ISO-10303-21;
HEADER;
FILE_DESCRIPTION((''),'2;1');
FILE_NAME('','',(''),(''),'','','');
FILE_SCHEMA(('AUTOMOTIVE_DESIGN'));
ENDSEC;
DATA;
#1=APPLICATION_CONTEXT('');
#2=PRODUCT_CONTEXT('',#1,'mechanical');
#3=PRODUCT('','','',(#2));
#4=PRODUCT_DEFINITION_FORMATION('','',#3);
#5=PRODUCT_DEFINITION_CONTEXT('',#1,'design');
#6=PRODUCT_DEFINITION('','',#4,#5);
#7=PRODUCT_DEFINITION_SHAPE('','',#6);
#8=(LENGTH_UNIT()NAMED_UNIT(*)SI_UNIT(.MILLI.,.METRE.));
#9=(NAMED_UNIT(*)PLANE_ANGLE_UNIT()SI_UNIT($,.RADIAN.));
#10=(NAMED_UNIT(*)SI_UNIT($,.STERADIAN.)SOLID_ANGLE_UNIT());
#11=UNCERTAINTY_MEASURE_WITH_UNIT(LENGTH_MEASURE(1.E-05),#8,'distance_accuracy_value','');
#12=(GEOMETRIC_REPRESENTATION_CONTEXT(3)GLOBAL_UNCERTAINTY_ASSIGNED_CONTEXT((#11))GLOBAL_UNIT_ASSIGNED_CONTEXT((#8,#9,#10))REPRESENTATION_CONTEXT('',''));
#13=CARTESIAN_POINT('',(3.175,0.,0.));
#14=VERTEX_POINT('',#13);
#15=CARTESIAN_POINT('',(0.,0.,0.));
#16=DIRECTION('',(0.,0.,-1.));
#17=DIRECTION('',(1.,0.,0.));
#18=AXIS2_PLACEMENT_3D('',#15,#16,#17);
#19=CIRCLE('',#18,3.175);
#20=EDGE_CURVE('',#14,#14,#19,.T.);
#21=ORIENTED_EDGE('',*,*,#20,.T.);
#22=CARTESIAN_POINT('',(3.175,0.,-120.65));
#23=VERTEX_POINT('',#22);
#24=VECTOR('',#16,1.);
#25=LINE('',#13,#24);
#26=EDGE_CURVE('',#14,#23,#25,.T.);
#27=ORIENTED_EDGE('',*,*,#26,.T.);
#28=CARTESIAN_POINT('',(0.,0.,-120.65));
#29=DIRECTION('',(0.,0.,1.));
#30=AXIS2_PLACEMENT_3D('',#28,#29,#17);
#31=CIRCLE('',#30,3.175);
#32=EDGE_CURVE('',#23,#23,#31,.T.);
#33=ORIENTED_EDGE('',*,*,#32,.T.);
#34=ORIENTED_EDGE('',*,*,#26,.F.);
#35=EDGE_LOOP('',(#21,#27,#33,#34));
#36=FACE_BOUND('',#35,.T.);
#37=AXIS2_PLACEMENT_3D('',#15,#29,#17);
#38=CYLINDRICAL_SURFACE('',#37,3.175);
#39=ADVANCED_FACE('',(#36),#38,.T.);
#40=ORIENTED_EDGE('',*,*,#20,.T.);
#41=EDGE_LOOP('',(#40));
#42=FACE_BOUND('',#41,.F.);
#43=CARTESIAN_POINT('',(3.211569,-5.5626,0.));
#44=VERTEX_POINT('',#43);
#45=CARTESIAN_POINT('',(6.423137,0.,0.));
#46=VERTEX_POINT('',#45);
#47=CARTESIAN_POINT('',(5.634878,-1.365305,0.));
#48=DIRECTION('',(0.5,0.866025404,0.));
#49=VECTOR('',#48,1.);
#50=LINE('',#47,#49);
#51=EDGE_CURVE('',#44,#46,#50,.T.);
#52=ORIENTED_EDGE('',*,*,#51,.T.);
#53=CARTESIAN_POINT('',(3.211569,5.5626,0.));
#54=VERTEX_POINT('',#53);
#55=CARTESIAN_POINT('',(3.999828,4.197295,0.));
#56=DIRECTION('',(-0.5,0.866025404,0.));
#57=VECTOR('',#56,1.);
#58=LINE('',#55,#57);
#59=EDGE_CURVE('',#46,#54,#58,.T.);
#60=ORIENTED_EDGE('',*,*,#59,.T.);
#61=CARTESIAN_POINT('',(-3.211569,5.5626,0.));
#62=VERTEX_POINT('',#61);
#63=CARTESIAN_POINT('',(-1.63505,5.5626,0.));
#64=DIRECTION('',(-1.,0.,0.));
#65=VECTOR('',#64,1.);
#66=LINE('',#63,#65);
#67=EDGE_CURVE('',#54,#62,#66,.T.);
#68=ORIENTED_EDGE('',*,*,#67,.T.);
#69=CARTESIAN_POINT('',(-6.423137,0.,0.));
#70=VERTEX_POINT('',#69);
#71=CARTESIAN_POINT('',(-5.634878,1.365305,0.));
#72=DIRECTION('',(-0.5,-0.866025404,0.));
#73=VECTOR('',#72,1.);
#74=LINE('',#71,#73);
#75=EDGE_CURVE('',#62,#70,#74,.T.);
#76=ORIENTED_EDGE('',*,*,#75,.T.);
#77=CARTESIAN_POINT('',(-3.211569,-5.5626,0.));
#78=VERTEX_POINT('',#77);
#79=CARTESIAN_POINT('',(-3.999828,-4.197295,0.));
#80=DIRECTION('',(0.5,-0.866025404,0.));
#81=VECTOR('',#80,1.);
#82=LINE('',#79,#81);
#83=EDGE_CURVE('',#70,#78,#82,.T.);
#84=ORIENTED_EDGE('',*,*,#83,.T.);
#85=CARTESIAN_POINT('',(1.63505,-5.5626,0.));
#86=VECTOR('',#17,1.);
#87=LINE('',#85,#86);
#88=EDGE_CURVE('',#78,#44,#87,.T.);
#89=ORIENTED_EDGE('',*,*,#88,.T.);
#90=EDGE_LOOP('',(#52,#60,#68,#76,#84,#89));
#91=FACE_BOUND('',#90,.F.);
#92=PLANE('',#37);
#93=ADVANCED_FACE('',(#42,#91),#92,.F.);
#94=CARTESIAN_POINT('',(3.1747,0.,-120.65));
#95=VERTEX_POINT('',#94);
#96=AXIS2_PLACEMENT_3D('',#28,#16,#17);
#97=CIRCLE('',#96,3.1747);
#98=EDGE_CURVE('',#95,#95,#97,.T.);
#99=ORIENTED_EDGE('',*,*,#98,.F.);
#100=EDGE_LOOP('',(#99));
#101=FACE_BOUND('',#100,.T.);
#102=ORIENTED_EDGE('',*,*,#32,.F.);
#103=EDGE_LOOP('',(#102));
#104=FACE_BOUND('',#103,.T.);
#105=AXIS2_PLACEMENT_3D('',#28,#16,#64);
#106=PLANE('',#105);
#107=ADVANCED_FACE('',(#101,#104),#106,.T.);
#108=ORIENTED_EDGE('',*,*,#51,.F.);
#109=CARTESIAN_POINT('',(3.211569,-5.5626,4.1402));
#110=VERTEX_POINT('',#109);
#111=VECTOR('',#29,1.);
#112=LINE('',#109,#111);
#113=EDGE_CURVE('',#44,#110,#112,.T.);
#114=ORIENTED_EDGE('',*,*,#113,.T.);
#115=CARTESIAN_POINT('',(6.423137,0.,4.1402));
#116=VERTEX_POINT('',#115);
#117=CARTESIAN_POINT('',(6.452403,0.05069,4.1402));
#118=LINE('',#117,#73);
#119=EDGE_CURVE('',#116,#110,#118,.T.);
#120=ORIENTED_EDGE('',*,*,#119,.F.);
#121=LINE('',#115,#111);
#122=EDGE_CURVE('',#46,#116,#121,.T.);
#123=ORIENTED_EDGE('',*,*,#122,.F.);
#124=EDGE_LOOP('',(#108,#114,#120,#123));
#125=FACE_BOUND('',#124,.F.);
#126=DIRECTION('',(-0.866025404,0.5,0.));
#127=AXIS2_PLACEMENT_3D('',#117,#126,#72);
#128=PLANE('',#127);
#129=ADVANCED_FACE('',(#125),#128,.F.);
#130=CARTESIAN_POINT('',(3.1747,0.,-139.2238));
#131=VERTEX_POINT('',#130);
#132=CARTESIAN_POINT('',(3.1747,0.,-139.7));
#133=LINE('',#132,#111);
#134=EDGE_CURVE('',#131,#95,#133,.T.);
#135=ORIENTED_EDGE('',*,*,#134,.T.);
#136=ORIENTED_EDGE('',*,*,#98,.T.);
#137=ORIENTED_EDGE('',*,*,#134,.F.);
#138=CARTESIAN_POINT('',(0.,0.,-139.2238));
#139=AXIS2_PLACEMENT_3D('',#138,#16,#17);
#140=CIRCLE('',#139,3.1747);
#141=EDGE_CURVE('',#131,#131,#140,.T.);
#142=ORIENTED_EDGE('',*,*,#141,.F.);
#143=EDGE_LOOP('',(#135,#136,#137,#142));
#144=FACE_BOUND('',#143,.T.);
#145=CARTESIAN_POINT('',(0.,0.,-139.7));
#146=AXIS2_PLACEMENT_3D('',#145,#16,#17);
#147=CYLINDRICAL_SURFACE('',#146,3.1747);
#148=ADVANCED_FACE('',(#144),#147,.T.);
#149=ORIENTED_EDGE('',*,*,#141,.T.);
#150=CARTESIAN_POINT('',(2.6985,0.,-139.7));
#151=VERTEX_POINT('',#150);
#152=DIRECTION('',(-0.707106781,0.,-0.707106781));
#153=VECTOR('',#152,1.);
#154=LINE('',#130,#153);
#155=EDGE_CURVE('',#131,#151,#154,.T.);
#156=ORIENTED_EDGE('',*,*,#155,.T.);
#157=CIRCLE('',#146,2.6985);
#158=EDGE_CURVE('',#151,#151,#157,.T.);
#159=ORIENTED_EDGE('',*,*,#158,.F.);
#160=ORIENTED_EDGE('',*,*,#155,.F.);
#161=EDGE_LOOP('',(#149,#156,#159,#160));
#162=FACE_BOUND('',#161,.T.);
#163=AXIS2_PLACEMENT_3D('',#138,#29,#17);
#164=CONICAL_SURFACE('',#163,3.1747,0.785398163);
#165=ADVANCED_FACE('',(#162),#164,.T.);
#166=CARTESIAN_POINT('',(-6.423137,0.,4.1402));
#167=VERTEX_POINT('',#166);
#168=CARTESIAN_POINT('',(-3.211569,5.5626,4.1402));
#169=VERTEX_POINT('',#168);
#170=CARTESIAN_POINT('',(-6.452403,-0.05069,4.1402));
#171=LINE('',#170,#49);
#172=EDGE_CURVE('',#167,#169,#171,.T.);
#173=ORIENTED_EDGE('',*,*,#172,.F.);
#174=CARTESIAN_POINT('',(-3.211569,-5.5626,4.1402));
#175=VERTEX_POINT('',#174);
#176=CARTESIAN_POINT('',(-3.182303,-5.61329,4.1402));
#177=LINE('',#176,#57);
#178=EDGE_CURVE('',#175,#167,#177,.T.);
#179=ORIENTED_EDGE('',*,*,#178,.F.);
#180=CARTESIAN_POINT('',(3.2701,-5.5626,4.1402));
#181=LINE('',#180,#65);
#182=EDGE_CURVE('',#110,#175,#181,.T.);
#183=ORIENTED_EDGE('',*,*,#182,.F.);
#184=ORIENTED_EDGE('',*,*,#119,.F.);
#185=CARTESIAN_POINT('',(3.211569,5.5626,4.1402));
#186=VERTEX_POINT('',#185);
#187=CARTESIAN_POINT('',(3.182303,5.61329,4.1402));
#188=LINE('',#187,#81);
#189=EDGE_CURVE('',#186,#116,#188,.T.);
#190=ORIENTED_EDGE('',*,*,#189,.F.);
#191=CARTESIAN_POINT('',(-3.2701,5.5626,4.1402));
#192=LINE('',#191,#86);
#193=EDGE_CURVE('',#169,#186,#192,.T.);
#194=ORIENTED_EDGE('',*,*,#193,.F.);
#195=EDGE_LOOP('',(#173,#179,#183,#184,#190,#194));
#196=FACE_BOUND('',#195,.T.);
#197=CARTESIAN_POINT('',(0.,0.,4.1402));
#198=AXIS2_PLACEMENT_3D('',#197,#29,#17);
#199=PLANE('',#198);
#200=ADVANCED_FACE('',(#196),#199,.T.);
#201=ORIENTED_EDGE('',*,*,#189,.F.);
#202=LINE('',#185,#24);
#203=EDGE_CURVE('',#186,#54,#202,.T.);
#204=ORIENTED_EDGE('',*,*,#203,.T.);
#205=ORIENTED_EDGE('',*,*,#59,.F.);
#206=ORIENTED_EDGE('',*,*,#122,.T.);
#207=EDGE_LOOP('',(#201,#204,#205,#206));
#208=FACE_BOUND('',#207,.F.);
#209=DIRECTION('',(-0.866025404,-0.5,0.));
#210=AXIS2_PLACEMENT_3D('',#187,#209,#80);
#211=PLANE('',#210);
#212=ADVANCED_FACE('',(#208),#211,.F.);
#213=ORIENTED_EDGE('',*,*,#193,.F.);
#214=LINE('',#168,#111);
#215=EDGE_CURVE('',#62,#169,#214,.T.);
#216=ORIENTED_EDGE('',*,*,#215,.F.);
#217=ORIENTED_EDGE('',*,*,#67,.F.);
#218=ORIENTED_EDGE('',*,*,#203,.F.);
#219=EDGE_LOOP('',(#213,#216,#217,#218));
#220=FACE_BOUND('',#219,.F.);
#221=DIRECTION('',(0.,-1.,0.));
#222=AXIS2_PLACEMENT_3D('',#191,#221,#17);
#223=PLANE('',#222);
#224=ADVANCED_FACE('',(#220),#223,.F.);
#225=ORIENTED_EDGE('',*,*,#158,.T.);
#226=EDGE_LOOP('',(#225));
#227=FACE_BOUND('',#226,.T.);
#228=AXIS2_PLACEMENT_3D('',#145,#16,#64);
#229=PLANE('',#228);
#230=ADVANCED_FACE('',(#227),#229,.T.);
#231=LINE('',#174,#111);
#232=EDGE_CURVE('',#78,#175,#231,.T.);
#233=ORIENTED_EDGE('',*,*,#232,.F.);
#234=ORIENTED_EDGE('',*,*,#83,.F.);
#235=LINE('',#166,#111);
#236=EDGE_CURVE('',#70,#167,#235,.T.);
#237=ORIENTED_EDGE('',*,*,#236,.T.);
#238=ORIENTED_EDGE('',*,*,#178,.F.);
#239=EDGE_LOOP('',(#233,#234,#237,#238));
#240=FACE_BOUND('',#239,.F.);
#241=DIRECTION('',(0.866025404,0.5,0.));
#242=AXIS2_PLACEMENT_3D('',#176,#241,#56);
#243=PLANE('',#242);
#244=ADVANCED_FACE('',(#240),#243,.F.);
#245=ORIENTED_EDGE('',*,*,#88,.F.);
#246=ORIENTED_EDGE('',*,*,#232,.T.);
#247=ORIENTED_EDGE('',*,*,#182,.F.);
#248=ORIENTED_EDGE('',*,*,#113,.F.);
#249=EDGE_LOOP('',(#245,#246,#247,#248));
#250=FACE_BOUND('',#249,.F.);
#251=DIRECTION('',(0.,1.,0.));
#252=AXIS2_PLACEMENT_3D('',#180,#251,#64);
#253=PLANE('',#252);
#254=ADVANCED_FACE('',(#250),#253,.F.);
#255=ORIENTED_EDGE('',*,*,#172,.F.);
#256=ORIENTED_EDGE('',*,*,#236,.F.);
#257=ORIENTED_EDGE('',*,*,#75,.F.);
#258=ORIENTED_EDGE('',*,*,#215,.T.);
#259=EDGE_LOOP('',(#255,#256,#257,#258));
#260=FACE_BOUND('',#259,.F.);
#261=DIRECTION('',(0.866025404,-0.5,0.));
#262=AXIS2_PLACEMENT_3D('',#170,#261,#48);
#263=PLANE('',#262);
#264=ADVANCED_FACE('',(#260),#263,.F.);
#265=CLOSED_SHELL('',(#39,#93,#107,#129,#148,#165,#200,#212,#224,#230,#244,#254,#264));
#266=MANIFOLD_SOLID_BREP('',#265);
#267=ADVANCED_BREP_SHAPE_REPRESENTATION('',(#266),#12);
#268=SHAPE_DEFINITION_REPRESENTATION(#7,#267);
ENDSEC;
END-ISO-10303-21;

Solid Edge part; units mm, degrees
sketch "Sketch1" plane through (0, 0, 0) normal (0, 0, 1) x (1, 0, 0)
  circle A0 centre (0, 0) radius 6.4526
  dimension "D1" = 12.9052
extrude "Protrusion1" add sketch "Sketch1" along normal blind 4.1402
sketch "Sketch2" plane through (0, 0, 0) normal (0, 0, -1) x (1, 0, 0)
  circle A0 centre (0, 0) radius 3.175
extrude "Protrusion2" add sketch "Sketch2" along normal blind 139.7
sketch "Sketch3" plane through (0, 0, -139.7) normal (0, 0, -1) x (1, 0, 0)
  circle A0 centre (0, 0) radius 3.1747
extrude "Cutout1" cut sketch "Sketch3" against normal blind 19.05 flip side to cut
chamfer "Chamfer_1" distance 0.4762 angle 45 1 edges at (-3.1747, 0, -139.7)
sketch "Sketch4" plane through (0, 0, 4.1402) normal (0, 0, 1) x (1, 0, 0)
  line L0 (-3.2701, 5.5626) -> (3.2701, 5.5626)
  dimension "D1" = 11.1252
extrude "Cutout2" cut sketch "Sketch4" against normal up to next material side at (0, 5.6126, 4.1402)
pattern_circular "Pattern1" count 6 over 360 about axis through (0, 0, 4.1402) along (0, 0, 1) of "Cutout2"
properties part number "24100936"
